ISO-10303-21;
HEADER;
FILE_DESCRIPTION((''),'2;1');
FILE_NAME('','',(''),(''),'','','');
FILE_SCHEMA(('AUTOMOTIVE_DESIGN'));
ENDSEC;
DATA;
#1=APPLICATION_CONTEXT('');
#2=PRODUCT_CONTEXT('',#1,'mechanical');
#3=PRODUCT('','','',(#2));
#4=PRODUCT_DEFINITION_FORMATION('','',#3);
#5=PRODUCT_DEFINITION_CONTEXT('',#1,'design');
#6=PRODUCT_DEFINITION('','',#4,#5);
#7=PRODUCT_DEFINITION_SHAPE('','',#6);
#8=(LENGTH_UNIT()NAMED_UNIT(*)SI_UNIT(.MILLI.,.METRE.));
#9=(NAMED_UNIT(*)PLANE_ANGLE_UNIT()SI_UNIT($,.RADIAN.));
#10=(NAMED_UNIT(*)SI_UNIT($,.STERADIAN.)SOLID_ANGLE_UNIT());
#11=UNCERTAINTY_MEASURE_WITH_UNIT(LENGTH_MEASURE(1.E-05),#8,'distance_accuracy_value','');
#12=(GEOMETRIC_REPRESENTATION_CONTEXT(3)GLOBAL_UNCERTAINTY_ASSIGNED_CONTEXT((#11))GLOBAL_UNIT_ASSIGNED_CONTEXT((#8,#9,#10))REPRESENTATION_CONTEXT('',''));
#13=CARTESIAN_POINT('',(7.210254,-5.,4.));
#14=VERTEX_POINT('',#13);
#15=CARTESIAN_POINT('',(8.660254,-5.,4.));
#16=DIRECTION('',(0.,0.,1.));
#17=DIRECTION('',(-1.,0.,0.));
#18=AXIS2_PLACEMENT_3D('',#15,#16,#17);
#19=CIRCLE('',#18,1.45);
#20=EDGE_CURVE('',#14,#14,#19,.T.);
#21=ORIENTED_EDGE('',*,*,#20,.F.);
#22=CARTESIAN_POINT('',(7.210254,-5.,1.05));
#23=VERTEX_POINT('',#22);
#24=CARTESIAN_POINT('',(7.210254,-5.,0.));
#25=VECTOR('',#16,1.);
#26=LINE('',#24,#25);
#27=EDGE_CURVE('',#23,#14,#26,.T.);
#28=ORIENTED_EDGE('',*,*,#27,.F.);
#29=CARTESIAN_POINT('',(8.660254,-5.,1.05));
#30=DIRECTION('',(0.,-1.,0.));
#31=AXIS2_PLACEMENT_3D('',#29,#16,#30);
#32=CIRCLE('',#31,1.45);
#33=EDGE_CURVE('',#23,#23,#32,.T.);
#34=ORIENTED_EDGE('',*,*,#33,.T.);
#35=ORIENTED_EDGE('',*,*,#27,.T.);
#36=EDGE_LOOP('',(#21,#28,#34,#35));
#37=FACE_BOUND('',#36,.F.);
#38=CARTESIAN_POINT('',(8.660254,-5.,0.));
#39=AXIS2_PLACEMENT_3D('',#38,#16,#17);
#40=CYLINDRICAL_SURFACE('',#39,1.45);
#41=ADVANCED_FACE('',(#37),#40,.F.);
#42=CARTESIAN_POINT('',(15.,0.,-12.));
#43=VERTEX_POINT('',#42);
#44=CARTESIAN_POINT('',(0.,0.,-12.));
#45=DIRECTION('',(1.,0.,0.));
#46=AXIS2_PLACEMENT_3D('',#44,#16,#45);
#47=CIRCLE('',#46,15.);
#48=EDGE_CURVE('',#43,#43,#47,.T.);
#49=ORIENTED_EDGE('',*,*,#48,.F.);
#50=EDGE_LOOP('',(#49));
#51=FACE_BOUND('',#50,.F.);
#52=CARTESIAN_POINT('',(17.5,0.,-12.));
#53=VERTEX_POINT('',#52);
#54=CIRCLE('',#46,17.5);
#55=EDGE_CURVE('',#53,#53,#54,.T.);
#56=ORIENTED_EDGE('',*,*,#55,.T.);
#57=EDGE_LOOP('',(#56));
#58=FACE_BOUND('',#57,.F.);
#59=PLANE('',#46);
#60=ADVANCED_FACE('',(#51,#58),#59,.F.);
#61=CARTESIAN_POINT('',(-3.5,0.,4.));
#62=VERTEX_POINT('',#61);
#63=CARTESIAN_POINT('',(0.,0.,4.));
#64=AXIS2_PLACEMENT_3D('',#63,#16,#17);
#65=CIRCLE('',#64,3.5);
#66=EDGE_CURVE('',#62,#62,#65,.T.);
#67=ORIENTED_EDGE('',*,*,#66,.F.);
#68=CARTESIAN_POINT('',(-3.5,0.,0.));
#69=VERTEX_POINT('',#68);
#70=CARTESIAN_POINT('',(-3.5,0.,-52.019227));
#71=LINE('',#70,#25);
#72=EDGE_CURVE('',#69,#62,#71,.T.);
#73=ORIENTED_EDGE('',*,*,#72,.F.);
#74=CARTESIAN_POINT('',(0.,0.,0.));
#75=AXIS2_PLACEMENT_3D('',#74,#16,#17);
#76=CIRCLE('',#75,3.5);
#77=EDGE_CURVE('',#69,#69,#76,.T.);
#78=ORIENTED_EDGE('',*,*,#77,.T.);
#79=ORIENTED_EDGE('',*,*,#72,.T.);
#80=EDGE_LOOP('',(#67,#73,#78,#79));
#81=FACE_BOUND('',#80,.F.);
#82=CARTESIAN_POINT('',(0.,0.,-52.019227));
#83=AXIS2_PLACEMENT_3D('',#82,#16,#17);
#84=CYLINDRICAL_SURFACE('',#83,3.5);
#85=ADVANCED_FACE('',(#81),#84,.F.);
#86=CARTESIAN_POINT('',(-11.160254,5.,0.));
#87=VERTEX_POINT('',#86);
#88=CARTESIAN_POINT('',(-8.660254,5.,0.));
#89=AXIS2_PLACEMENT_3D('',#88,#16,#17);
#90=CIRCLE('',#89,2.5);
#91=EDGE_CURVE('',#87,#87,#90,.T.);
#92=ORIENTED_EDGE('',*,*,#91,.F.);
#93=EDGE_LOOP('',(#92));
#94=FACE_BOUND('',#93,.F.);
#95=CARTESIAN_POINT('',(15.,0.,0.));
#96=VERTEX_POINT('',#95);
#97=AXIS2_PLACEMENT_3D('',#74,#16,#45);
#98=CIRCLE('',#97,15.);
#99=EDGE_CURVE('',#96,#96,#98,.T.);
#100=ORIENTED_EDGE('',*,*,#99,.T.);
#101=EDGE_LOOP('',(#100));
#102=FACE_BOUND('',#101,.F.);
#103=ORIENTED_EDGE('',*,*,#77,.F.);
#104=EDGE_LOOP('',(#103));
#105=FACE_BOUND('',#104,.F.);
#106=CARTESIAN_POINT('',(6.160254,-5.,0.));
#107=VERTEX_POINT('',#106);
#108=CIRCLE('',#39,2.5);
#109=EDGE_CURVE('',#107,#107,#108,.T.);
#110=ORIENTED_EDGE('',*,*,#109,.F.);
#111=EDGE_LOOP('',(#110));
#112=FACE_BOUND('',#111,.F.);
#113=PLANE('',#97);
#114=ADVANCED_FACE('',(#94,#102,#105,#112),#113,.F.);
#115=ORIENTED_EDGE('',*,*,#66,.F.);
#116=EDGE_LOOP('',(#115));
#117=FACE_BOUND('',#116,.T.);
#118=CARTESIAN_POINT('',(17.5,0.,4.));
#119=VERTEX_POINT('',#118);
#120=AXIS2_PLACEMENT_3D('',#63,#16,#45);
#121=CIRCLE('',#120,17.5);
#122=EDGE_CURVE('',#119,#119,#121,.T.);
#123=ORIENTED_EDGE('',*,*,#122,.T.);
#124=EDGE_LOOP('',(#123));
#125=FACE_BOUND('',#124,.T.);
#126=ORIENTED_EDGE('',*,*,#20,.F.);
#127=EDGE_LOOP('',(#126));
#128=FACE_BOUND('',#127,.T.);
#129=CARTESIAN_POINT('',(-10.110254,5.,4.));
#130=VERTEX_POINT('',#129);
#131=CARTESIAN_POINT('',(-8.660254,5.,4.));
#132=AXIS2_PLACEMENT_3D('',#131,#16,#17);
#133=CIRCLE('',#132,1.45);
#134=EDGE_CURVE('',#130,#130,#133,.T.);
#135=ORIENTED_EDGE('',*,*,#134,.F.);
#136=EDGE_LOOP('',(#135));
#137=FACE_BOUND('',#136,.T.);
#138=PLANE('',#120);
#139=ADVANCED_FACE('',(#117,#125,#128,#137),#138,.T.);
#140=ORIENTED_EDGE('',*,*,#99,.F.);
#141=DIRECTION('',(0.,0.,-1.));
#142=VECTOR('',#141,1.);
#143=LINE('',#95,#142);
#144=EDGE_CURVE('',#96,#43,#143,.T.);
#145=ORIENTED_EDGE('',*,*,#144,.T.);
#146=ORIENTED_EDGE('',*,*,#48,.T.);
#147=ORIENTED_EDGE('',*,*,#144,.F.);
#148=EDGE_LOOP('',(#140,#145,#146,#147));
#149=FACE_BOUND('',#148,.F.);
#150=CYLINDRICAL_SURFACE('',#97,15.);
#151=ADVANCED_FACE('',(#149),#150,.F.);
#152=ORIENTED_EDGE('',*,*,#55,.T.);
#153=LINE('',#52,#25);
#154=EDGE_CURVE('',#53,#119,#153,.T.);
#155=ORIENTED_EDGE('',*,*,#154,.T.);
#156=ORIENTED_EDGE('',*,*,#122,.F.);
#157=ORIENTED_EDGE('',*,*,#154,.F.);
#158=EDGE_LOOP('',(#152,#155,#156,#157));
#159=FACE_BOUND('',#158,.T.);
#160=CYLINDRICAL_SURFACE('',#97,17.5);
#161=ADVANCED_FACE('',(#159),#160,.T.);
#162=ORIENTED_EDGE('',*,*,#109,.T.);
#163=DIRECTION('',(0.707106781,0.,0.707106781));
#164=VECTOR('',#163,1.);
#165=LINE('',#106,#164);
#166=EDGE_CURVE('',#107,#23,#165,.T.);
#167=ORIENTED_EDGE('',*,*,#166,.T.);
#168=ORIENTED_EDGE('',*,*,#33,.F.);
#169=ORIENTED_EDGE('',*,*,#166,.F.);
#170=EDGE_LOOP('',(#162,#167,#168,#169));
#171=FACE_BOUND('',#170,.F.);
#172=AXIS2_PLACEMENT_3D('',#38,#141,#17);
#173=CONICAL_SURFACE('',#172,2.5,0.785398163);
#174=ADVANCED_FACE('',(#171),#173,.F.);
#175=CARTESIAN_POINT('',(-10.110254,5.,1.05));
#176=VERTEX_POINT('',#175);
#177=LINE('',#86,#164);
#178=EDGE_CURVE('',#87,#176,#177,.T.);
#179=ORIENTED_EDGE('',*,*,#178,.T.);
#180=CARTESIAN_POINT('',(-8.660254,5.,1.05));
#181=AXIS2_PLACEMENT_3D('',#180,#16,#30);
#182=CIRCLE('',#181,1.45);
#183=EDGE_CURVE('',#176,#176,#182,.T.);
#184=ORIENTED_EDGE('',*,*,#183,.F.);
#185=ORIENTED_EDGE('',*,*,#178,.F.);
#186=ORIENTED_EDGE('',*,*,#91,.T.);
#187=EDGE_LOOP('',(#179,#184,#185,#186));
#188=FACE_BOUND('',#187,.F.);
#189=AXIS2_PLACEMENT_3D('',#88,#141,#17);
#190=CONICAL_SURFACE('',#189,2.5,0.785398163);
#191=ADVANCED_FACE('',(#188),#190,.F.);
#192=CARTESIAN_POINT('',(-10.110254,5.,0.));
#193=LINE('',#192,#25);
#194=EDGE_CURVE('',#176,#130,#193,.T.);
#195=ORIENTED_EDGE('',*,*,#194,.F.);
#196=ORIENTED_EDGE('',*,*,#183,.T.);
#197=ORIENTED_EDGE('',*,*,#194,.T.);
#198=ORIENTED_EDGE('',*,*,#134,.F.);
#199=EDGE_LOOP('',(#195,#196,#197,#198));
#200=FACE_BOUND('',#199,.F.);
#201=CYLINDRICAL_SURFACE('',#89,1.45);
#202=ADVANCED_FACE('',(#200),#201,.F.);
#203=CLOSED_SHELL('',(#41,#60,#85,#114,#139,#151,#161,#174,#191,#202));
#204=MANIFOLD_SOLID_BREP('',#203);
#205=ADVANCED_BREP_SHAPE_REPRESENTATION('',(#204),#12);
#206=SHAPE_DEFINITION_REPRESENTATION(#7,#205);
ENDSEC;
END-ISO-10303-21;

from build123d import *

# Parameters (mm, degrees)
F0_R           = 17.5
F0_R_2         = 15
F1_DEPTH       = 4
F2_DEPTH       = 12
F3_D           = 2.9
F3_CSINK_D     = 5
F3_CSINK_ANGLE = 90
F4_D           = 7


# Not quite as in the source:
# - a feature names something its author has since deleted; it is built from what else it names


with BuildPart() as f1:
    # F0 (on Top) → F1 (new body)
    with BuildSketch(Plane.XY):
        Circle(F0_R)
        Circle(F0_R_2, mode=Mode.SUBTRACT)
        Circle(F0_R_2)
    extrude(amount=F1_DEPTH)

    # F0 (on Top) → F2 (join)
    with BuildSketch(Plane.XY):
        Circle(F0_R)
        Circle(F0_R_2, mode=Mode.SUBTRACT)
    extrude(amount=-F2_DEPTH)

    # F3 (through all)
    with Locations(Plane(origin=(0, 0, 0), x_dir=(1, 0, 0), z_dir=(0, 0, -1))):
        with Locations((8.6602540378, 5), (-8.6602540378, -5)):
            CounterSinkHole(F3_D / 2, F3_CSINK_D / 2, counter_sink_angle=F3_CSINK_ANGLE)

    # F4 (through all)
    with Locations(Plane(origin=(0, 0, 0), x_dir=(1, 0, 0), z_dir=(0, 0, -1))):
        with Locations((0, 0)):
            Hole(F4_D / 2)


solid = f1.part
